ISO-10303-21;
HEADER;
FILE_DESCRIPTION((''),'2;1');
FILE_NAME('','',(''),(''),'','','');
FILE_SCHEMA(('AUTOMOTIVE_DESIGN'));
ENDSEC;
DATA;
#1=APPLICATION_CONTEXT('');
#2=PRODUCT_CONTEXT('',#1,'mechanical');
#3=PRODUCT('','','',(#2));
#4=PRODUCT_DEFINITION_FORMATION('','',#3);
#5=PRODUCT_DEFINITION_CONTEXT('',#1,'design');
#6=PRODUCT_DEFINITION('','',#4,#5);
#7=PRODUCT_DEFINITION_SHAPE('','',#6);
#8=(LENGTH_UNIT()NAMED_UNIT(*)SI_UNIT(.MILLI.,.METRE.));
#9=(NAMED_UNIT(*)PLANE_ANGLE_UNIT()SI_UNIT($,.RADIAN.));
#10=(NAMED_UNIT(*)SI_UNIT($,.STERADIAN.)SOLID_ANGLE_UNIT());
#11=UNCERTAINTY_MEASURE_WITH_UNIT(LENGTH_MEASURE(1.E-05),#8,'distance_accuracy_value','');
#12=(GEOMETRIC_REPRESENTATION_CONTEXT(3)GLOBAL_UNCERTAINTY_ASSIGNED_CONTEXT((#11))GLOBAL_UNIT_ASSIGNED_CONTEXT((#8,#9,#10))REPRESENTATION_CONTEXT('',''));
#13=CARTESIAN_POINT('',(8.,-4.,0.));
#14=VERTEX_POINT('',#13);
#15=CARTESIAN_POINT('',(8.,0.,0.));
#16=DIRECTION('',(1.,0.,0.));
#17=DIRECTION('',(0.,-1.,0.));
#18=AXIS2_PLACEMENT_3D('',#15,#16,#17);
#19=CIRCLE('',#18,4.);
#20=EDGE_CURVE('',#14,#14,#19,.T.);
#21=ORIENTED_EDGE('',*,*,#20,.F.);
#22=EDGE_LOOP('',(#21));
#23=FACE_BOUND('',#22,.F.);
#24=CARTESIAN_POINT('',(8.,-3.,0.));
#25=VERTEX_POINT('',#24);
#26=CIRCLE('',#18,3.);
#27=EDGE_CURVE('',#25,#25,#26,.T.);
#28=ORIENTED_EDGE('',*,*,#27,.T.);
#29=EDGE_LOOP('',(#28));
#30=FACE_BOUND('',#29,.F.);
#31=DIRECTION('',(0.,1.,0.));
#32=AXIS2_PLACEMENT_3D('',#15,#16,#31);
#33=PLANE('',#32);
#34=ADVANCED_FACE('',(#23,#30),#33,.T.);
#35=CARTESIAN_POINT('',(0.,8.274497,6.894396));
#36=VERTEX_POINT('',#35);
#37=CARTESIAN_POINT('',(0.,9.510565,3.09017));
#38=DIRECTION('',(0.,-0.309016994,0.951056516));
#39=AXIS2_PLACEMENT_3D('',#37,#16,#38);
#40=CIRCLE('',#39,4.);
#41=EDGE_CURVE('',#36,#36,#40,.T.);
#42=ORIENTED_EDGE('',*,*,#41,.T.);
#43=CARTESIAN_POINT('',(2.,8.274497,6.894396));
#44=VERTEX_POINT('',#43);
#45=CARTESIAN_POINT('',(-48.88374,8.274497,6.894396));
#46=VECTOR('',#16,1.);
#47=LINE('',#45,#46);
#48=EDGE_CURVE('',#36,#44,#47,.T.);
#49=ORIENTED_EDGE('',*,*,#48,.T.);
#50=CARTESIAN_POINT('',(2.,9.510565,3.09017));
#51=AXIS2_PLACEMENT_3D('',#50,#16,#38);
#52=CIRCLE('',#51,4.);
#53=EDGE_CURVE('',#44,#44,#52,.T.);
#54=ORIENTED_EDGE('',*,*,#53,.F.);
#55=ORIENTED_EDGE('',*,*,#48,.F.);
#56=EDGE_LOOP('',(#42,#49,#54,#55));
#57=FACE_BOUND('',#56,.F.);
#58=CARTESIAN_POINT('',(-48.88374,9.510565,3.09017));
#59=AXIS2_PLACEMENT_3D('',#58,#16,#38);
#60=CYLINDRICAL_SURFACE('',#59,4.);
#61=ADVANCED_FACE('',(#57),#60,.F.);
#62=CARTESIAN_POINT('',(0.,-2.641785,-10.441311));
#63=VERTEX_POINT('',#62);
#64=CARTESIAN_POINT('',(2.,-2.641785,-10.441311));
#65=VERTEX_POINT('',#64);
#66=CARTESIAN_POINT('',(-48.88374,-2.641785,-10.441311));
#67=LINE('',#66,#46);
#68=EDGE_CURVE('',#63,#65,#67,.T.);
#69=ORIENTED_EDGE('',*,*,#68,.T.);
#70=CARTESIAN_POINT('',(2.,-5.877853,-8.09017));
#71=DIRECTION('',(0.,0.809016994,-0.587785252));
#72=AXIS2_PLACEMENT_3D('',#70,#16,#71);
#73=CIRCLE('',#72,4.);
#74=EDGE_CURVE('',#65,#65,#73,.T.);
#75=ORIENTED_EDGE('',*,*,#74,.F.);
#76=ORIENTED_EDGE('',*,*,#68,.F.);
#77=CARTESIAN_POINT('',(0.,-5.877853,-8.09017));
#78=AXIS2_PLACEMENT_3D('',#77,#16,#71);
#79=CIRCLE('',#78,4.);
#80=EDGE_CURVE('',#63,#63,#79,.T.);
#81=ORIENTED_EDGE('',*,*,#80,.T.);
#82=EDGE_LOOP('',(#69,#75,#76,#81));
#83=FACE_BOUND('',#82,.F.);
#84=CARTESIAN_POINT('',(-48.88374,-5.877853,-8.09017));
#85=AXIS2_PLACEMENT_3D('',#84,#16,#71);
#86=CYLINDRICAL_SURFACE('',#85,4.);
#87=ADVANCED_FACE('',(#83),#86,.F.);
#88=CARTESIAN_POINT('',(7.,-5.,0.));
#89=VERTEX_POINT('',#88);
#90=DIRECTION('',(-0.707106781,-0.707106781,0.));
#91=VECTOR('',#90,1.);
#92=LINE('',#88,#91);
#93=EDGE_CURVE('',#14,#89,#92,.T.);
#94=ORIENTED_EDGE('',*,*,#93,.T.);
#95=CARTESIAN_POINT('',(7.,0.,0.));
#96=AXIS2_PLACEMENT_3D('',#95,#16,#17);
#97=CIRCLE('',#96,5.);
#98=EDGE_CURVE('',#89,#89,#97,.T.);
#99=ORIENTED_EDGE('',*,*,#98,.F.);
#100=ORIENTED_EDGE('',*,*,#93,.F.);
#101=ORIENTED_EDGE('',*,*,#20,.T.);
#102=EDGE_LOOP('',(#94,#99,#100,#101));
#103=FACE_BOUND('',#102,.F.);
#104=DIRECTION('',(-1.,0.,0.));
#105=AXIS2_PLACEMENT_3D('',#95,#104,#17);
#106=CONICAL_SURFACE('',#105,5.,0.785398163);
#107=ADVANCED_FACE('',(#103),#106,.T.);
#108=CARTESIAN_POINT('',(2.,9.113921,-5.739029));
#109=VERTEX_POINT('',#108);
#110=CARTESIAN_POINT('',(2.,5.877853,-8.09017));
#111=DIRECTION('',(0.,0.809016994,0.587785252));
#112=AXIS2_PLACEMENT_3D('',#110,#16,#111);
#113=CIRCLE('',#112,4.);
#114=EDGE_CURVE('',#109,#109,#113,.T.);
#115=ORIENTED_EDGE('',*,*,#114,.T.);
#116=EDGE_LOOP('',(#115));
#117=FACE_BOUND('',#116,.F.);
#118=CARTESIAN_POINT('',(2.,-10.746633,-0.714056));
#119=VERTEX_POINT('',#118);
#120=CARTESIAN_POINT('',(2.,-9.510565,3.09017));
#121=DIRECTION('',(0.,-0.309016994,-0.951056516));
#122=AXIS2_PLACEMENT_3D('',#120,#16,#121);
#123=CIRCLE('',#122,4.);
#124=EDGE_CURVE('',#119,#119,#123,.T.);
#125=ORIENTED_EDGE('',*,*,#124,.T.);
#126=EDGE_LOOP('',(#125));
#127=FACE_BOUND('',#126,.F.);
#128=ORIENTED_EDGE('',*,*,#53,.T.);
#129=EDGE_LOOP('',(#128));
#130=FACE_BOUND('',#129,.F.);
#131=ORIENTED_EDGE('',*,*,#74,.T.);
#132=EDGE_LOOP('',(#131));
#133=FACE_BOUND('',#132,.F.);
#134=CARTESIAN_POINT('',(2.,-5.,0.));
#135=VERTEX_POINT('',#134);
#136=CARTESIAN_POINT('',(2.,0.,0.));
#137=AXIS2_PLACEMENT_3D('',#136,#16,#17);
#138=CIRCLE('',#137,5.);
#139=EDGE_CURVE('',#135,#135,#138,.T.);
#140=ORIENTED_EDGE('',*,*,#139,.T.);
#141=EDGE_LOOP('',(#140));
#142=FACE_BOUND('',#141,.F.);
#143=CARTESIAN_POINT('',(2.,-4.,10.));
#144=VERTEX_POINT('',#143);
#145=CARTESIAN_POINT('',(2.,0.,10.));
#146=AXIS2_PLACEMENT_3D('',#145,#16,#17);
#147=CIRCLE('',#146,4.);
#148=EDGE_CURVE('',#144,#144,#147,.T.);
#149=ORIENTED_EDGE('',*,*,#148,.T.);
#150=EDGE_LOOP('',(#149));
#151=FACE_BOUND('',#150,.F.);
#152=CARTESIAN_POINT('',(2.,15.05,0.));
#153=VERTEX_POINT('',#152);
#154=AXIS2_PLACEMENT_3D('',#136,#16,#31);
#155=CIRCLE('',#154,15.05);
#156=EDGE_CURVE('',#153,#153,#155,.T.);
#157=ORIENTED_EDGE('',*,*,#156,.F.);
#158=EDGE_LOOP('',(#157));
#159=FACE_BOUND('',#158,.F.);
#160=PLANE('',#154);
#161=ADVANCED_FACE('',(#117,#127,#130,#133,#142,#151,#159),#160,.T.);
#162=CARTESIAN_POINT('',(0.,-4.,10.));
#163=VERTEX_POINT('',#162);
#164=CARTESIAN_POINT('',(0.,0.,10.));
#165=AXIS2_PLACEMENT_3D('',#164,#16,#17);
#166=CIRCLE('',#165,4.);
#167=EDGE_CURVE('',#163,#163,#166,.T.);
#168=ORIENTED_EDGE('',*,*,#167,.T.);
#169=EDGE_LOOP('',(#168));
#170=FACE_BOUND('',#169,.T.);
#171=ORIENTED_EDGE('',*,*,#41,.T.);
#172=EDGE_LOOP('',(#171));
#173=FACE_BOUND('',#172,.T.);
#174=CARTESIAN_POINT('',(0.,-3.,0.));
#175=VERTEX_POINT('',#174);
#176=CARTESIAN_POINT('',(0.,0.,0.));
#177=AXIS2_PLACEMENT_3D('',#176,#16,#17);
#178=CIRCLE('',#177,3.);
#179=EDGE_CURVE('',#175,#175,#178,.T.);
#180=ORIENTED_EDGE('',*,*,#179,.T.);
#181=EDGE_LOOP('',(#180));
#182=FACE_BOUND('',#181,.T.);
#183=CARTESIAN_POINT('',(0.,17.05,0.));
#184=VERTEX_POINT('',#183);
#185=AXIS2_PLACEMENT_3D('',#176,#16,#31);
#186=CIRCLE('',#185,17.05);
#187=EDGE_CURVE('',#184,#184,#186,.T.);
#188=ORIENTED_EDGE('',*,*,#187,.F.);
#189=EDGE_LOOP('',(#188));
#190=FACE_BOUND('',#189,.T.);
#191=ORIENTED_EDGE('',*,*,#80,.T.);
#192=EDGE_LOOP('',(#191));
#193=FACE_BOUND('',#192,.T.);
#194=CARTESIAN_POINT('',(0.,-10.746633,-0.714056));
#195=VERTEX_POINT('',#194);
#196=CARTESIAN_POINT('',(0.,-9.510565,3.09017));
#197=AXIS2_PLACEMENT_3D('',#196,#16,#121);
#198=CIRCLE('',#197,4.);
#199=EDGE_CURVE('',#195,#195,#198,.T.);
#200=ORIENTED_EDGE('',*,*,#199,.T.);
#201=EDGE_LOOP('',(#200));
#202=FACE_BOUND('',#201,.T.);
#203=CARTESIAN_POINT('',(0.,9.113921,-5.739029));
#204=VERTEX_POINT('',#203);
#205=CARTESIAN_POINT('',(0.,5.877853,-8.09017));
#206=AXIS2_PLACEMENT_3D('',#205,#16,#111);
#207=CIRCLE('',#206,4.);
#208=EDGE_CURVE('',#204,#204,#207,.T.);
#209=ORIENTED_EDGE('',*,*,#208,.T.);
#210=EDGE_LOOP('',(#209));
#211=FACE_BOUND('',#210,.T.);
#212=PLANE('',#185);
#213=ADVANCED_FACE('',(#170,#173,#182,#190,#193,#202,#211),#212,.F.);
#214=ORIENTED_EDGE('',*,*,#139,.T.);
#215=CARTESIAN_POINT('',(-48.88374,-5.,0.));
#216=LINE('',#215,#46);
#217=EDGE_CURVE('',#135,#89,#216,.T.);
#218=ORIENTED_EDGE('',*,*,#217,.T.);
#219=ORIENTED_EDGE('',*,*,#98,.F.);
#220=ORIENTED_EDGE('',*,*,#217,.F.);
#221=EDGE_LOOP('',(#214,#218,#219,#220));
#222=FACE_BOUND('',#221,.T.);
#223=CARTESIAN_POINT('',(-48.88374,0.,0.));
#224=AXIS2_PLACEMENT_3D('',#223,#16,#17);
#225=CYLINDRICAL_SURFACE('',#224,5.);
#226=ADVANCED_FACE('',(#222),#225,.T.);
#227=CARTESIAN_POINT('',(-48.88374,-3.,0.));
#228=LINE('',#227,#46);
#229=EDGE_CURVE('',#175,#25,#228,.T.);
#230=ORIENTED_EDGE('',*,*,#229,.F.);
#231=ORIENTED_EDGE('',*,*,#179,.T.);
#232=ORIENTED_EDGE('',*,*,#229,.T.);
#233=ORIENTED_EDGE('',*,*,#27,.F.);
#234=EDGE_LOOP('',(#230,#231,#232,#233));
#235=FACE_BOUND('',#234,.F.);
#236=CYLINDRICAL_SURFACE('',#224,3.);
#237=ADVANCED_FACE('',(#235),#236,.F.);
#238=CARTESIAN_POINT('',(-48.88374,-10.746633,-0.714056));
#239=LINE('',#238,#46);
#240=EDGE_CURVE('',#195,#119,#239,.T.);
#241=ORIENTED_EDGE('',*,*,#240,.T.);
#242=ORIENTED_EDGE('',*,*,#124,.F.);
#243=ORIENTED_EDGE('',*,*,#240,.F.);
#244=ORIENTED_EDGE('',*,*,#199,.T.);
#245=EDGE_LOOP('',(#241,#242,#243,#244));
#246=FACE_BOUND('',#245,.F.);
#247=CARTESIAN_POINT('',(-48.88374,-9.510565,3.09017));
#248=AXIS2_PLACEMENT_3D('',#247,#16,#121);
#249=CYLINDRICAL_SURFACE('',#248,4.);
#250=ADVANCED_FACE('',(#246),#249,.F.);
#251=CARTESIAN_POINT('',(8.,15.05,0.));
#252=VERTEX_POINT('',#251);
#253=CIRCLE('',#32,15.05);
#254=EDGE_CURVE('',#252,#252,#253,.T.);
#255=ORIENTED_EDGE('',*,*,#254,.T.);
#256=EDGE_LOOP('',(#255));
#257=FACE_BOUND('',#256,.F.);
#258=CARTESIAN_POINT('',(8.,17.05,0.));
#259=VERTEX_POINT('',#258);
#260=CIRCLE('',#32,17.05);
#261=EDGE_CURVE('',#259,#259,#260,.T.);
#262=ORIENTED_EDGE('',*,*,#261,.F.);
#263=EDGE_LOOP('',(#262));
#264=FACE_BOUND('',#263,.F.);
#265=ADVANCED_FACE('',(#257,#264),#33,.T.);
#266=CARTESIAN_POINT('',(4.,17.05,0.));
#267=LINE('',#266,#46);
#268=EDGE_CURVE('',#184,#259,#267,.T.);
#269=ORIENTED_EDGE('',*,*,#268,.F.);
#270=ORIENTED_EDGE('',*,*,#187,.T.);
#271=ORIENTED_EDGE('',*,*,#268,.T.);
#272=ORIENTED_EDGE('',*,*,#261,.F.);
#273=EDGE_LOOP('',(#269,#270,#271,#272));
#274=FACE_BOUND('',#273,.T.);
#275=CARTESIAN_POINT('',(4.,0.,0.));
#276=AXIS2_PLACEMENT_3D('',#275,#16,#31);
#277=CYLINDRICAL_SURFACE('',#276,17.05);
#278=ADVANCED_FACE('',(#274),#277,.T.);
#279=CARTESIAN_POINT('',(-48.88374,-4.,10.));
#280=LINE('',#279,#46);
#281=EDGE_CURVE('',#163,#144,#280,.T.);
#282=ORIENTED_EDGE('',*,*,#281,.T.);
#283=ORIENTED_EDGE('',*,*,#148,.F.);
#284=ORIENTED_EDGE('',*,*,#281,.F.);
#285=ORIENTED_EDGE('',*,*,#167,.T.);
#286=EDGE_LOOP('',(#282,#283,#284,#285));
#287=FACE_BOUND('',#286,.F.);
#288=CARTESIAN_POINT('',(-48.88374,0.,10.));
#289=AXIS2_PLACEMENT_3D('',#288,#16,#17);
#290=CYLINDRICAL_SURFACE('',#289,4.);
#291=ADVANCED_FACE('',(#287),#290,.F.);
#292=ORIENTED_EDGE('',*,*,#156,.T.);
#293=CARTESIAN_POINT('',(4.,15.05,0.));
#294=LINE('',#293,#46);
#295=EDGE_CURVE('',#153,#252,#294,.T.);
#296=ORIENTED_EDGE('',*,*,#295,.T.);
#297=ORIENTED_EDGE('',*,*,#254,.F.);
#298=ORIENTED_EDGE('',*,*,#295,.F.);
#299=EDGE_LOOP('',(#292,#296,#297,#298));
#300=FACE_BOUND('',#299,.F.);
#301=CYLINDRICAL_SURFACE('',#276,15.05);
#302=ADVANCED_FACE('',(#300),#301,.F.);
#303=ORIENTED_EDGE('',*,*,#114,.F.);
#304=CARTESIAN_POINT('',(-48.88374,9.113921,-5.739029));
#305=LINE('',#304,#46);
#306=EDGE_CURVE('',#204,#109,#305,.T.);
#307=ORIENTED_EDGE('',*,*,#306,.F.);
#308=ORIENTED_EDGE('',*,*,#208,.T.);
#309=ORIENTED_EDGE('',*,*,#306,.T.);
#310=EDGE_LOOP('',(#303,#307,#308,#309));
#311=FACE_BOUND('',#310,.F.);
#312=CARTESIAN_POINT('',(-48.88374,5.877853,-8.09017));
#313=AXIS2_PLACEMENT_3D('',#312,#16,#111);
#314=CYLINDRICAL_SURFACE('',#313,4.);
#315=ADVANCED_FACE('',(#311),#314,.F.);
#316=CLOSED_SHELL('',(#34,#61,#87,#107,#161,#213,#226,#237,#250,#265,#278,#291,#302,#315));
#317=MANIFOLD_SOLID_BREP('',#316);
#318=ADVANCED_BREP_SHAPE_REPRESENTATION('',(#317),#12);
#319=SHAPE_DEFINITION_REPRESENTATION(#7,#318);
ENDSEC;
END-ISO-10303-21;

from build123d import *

# Parameters (mm, degrees)
F0_W            = 8
F0_H            = 17.05
F3_D            = 6
F4_T            = -2
F6_D            = 8
F6_COPIES_COUNT = 5
F7_SIZE         = 1


# Not quite as in the source:
# - a pattern or mirror of a feature is missing from the dataset's text; its kind, count and spacing are read off the source's solid


with BuildPart() as f1:
    # F0 (on Top) → F1 (revolve)
    with BuildSketch(Plane.XY):
        with Locations((4, 8.525)):
            Rectangle(F0_W, F0_H)
    revolve(axis=Axis((4, 0, 0), (1, 0, 0)))

    # F3 (through all)
    with Locations(Plane(origin=(0, 0, 0), x_dir=(0, 1, 0), z_dir=(-1, 0, 0))):
        with Locations((0, 0)):
            Hole(F3_D / 2)

    # F4
    f4_openings = [f1.faces().sort_by_distance(p)[0] for p in [
        (8, -16.567753, 0),
    ]]
    offset(amount=F4_T, openings=f4_openings)

    # F6 (through all)
    with Locations(Plane(origin=(0, 0, 0), x_dir=(0, 1, 0), z_dir=(-1, 0, 0))):
        with Locations((0, -10)):
            f6 = Hole(F6_D / 2)

    # F6_copies: F6 ×5 about axis
    f6_copies_axis = Axis((0, 0, 0), (1, 0, 0))
    for i in range(1, F6_COPIES_COUNT):
        add(f6.rotate(f6_copies_axis, i * 360 / F6_COPIES_COUNT), mode=Mode.SUBTRACT)

    # F7
    f7_edges = [f1.edges().sort_by_distance(p)[0] for p in [
        (8, -5, 0),
    ]]
    chamfer(f7_edges, length=F7_SIZE)


solid = f1.part
